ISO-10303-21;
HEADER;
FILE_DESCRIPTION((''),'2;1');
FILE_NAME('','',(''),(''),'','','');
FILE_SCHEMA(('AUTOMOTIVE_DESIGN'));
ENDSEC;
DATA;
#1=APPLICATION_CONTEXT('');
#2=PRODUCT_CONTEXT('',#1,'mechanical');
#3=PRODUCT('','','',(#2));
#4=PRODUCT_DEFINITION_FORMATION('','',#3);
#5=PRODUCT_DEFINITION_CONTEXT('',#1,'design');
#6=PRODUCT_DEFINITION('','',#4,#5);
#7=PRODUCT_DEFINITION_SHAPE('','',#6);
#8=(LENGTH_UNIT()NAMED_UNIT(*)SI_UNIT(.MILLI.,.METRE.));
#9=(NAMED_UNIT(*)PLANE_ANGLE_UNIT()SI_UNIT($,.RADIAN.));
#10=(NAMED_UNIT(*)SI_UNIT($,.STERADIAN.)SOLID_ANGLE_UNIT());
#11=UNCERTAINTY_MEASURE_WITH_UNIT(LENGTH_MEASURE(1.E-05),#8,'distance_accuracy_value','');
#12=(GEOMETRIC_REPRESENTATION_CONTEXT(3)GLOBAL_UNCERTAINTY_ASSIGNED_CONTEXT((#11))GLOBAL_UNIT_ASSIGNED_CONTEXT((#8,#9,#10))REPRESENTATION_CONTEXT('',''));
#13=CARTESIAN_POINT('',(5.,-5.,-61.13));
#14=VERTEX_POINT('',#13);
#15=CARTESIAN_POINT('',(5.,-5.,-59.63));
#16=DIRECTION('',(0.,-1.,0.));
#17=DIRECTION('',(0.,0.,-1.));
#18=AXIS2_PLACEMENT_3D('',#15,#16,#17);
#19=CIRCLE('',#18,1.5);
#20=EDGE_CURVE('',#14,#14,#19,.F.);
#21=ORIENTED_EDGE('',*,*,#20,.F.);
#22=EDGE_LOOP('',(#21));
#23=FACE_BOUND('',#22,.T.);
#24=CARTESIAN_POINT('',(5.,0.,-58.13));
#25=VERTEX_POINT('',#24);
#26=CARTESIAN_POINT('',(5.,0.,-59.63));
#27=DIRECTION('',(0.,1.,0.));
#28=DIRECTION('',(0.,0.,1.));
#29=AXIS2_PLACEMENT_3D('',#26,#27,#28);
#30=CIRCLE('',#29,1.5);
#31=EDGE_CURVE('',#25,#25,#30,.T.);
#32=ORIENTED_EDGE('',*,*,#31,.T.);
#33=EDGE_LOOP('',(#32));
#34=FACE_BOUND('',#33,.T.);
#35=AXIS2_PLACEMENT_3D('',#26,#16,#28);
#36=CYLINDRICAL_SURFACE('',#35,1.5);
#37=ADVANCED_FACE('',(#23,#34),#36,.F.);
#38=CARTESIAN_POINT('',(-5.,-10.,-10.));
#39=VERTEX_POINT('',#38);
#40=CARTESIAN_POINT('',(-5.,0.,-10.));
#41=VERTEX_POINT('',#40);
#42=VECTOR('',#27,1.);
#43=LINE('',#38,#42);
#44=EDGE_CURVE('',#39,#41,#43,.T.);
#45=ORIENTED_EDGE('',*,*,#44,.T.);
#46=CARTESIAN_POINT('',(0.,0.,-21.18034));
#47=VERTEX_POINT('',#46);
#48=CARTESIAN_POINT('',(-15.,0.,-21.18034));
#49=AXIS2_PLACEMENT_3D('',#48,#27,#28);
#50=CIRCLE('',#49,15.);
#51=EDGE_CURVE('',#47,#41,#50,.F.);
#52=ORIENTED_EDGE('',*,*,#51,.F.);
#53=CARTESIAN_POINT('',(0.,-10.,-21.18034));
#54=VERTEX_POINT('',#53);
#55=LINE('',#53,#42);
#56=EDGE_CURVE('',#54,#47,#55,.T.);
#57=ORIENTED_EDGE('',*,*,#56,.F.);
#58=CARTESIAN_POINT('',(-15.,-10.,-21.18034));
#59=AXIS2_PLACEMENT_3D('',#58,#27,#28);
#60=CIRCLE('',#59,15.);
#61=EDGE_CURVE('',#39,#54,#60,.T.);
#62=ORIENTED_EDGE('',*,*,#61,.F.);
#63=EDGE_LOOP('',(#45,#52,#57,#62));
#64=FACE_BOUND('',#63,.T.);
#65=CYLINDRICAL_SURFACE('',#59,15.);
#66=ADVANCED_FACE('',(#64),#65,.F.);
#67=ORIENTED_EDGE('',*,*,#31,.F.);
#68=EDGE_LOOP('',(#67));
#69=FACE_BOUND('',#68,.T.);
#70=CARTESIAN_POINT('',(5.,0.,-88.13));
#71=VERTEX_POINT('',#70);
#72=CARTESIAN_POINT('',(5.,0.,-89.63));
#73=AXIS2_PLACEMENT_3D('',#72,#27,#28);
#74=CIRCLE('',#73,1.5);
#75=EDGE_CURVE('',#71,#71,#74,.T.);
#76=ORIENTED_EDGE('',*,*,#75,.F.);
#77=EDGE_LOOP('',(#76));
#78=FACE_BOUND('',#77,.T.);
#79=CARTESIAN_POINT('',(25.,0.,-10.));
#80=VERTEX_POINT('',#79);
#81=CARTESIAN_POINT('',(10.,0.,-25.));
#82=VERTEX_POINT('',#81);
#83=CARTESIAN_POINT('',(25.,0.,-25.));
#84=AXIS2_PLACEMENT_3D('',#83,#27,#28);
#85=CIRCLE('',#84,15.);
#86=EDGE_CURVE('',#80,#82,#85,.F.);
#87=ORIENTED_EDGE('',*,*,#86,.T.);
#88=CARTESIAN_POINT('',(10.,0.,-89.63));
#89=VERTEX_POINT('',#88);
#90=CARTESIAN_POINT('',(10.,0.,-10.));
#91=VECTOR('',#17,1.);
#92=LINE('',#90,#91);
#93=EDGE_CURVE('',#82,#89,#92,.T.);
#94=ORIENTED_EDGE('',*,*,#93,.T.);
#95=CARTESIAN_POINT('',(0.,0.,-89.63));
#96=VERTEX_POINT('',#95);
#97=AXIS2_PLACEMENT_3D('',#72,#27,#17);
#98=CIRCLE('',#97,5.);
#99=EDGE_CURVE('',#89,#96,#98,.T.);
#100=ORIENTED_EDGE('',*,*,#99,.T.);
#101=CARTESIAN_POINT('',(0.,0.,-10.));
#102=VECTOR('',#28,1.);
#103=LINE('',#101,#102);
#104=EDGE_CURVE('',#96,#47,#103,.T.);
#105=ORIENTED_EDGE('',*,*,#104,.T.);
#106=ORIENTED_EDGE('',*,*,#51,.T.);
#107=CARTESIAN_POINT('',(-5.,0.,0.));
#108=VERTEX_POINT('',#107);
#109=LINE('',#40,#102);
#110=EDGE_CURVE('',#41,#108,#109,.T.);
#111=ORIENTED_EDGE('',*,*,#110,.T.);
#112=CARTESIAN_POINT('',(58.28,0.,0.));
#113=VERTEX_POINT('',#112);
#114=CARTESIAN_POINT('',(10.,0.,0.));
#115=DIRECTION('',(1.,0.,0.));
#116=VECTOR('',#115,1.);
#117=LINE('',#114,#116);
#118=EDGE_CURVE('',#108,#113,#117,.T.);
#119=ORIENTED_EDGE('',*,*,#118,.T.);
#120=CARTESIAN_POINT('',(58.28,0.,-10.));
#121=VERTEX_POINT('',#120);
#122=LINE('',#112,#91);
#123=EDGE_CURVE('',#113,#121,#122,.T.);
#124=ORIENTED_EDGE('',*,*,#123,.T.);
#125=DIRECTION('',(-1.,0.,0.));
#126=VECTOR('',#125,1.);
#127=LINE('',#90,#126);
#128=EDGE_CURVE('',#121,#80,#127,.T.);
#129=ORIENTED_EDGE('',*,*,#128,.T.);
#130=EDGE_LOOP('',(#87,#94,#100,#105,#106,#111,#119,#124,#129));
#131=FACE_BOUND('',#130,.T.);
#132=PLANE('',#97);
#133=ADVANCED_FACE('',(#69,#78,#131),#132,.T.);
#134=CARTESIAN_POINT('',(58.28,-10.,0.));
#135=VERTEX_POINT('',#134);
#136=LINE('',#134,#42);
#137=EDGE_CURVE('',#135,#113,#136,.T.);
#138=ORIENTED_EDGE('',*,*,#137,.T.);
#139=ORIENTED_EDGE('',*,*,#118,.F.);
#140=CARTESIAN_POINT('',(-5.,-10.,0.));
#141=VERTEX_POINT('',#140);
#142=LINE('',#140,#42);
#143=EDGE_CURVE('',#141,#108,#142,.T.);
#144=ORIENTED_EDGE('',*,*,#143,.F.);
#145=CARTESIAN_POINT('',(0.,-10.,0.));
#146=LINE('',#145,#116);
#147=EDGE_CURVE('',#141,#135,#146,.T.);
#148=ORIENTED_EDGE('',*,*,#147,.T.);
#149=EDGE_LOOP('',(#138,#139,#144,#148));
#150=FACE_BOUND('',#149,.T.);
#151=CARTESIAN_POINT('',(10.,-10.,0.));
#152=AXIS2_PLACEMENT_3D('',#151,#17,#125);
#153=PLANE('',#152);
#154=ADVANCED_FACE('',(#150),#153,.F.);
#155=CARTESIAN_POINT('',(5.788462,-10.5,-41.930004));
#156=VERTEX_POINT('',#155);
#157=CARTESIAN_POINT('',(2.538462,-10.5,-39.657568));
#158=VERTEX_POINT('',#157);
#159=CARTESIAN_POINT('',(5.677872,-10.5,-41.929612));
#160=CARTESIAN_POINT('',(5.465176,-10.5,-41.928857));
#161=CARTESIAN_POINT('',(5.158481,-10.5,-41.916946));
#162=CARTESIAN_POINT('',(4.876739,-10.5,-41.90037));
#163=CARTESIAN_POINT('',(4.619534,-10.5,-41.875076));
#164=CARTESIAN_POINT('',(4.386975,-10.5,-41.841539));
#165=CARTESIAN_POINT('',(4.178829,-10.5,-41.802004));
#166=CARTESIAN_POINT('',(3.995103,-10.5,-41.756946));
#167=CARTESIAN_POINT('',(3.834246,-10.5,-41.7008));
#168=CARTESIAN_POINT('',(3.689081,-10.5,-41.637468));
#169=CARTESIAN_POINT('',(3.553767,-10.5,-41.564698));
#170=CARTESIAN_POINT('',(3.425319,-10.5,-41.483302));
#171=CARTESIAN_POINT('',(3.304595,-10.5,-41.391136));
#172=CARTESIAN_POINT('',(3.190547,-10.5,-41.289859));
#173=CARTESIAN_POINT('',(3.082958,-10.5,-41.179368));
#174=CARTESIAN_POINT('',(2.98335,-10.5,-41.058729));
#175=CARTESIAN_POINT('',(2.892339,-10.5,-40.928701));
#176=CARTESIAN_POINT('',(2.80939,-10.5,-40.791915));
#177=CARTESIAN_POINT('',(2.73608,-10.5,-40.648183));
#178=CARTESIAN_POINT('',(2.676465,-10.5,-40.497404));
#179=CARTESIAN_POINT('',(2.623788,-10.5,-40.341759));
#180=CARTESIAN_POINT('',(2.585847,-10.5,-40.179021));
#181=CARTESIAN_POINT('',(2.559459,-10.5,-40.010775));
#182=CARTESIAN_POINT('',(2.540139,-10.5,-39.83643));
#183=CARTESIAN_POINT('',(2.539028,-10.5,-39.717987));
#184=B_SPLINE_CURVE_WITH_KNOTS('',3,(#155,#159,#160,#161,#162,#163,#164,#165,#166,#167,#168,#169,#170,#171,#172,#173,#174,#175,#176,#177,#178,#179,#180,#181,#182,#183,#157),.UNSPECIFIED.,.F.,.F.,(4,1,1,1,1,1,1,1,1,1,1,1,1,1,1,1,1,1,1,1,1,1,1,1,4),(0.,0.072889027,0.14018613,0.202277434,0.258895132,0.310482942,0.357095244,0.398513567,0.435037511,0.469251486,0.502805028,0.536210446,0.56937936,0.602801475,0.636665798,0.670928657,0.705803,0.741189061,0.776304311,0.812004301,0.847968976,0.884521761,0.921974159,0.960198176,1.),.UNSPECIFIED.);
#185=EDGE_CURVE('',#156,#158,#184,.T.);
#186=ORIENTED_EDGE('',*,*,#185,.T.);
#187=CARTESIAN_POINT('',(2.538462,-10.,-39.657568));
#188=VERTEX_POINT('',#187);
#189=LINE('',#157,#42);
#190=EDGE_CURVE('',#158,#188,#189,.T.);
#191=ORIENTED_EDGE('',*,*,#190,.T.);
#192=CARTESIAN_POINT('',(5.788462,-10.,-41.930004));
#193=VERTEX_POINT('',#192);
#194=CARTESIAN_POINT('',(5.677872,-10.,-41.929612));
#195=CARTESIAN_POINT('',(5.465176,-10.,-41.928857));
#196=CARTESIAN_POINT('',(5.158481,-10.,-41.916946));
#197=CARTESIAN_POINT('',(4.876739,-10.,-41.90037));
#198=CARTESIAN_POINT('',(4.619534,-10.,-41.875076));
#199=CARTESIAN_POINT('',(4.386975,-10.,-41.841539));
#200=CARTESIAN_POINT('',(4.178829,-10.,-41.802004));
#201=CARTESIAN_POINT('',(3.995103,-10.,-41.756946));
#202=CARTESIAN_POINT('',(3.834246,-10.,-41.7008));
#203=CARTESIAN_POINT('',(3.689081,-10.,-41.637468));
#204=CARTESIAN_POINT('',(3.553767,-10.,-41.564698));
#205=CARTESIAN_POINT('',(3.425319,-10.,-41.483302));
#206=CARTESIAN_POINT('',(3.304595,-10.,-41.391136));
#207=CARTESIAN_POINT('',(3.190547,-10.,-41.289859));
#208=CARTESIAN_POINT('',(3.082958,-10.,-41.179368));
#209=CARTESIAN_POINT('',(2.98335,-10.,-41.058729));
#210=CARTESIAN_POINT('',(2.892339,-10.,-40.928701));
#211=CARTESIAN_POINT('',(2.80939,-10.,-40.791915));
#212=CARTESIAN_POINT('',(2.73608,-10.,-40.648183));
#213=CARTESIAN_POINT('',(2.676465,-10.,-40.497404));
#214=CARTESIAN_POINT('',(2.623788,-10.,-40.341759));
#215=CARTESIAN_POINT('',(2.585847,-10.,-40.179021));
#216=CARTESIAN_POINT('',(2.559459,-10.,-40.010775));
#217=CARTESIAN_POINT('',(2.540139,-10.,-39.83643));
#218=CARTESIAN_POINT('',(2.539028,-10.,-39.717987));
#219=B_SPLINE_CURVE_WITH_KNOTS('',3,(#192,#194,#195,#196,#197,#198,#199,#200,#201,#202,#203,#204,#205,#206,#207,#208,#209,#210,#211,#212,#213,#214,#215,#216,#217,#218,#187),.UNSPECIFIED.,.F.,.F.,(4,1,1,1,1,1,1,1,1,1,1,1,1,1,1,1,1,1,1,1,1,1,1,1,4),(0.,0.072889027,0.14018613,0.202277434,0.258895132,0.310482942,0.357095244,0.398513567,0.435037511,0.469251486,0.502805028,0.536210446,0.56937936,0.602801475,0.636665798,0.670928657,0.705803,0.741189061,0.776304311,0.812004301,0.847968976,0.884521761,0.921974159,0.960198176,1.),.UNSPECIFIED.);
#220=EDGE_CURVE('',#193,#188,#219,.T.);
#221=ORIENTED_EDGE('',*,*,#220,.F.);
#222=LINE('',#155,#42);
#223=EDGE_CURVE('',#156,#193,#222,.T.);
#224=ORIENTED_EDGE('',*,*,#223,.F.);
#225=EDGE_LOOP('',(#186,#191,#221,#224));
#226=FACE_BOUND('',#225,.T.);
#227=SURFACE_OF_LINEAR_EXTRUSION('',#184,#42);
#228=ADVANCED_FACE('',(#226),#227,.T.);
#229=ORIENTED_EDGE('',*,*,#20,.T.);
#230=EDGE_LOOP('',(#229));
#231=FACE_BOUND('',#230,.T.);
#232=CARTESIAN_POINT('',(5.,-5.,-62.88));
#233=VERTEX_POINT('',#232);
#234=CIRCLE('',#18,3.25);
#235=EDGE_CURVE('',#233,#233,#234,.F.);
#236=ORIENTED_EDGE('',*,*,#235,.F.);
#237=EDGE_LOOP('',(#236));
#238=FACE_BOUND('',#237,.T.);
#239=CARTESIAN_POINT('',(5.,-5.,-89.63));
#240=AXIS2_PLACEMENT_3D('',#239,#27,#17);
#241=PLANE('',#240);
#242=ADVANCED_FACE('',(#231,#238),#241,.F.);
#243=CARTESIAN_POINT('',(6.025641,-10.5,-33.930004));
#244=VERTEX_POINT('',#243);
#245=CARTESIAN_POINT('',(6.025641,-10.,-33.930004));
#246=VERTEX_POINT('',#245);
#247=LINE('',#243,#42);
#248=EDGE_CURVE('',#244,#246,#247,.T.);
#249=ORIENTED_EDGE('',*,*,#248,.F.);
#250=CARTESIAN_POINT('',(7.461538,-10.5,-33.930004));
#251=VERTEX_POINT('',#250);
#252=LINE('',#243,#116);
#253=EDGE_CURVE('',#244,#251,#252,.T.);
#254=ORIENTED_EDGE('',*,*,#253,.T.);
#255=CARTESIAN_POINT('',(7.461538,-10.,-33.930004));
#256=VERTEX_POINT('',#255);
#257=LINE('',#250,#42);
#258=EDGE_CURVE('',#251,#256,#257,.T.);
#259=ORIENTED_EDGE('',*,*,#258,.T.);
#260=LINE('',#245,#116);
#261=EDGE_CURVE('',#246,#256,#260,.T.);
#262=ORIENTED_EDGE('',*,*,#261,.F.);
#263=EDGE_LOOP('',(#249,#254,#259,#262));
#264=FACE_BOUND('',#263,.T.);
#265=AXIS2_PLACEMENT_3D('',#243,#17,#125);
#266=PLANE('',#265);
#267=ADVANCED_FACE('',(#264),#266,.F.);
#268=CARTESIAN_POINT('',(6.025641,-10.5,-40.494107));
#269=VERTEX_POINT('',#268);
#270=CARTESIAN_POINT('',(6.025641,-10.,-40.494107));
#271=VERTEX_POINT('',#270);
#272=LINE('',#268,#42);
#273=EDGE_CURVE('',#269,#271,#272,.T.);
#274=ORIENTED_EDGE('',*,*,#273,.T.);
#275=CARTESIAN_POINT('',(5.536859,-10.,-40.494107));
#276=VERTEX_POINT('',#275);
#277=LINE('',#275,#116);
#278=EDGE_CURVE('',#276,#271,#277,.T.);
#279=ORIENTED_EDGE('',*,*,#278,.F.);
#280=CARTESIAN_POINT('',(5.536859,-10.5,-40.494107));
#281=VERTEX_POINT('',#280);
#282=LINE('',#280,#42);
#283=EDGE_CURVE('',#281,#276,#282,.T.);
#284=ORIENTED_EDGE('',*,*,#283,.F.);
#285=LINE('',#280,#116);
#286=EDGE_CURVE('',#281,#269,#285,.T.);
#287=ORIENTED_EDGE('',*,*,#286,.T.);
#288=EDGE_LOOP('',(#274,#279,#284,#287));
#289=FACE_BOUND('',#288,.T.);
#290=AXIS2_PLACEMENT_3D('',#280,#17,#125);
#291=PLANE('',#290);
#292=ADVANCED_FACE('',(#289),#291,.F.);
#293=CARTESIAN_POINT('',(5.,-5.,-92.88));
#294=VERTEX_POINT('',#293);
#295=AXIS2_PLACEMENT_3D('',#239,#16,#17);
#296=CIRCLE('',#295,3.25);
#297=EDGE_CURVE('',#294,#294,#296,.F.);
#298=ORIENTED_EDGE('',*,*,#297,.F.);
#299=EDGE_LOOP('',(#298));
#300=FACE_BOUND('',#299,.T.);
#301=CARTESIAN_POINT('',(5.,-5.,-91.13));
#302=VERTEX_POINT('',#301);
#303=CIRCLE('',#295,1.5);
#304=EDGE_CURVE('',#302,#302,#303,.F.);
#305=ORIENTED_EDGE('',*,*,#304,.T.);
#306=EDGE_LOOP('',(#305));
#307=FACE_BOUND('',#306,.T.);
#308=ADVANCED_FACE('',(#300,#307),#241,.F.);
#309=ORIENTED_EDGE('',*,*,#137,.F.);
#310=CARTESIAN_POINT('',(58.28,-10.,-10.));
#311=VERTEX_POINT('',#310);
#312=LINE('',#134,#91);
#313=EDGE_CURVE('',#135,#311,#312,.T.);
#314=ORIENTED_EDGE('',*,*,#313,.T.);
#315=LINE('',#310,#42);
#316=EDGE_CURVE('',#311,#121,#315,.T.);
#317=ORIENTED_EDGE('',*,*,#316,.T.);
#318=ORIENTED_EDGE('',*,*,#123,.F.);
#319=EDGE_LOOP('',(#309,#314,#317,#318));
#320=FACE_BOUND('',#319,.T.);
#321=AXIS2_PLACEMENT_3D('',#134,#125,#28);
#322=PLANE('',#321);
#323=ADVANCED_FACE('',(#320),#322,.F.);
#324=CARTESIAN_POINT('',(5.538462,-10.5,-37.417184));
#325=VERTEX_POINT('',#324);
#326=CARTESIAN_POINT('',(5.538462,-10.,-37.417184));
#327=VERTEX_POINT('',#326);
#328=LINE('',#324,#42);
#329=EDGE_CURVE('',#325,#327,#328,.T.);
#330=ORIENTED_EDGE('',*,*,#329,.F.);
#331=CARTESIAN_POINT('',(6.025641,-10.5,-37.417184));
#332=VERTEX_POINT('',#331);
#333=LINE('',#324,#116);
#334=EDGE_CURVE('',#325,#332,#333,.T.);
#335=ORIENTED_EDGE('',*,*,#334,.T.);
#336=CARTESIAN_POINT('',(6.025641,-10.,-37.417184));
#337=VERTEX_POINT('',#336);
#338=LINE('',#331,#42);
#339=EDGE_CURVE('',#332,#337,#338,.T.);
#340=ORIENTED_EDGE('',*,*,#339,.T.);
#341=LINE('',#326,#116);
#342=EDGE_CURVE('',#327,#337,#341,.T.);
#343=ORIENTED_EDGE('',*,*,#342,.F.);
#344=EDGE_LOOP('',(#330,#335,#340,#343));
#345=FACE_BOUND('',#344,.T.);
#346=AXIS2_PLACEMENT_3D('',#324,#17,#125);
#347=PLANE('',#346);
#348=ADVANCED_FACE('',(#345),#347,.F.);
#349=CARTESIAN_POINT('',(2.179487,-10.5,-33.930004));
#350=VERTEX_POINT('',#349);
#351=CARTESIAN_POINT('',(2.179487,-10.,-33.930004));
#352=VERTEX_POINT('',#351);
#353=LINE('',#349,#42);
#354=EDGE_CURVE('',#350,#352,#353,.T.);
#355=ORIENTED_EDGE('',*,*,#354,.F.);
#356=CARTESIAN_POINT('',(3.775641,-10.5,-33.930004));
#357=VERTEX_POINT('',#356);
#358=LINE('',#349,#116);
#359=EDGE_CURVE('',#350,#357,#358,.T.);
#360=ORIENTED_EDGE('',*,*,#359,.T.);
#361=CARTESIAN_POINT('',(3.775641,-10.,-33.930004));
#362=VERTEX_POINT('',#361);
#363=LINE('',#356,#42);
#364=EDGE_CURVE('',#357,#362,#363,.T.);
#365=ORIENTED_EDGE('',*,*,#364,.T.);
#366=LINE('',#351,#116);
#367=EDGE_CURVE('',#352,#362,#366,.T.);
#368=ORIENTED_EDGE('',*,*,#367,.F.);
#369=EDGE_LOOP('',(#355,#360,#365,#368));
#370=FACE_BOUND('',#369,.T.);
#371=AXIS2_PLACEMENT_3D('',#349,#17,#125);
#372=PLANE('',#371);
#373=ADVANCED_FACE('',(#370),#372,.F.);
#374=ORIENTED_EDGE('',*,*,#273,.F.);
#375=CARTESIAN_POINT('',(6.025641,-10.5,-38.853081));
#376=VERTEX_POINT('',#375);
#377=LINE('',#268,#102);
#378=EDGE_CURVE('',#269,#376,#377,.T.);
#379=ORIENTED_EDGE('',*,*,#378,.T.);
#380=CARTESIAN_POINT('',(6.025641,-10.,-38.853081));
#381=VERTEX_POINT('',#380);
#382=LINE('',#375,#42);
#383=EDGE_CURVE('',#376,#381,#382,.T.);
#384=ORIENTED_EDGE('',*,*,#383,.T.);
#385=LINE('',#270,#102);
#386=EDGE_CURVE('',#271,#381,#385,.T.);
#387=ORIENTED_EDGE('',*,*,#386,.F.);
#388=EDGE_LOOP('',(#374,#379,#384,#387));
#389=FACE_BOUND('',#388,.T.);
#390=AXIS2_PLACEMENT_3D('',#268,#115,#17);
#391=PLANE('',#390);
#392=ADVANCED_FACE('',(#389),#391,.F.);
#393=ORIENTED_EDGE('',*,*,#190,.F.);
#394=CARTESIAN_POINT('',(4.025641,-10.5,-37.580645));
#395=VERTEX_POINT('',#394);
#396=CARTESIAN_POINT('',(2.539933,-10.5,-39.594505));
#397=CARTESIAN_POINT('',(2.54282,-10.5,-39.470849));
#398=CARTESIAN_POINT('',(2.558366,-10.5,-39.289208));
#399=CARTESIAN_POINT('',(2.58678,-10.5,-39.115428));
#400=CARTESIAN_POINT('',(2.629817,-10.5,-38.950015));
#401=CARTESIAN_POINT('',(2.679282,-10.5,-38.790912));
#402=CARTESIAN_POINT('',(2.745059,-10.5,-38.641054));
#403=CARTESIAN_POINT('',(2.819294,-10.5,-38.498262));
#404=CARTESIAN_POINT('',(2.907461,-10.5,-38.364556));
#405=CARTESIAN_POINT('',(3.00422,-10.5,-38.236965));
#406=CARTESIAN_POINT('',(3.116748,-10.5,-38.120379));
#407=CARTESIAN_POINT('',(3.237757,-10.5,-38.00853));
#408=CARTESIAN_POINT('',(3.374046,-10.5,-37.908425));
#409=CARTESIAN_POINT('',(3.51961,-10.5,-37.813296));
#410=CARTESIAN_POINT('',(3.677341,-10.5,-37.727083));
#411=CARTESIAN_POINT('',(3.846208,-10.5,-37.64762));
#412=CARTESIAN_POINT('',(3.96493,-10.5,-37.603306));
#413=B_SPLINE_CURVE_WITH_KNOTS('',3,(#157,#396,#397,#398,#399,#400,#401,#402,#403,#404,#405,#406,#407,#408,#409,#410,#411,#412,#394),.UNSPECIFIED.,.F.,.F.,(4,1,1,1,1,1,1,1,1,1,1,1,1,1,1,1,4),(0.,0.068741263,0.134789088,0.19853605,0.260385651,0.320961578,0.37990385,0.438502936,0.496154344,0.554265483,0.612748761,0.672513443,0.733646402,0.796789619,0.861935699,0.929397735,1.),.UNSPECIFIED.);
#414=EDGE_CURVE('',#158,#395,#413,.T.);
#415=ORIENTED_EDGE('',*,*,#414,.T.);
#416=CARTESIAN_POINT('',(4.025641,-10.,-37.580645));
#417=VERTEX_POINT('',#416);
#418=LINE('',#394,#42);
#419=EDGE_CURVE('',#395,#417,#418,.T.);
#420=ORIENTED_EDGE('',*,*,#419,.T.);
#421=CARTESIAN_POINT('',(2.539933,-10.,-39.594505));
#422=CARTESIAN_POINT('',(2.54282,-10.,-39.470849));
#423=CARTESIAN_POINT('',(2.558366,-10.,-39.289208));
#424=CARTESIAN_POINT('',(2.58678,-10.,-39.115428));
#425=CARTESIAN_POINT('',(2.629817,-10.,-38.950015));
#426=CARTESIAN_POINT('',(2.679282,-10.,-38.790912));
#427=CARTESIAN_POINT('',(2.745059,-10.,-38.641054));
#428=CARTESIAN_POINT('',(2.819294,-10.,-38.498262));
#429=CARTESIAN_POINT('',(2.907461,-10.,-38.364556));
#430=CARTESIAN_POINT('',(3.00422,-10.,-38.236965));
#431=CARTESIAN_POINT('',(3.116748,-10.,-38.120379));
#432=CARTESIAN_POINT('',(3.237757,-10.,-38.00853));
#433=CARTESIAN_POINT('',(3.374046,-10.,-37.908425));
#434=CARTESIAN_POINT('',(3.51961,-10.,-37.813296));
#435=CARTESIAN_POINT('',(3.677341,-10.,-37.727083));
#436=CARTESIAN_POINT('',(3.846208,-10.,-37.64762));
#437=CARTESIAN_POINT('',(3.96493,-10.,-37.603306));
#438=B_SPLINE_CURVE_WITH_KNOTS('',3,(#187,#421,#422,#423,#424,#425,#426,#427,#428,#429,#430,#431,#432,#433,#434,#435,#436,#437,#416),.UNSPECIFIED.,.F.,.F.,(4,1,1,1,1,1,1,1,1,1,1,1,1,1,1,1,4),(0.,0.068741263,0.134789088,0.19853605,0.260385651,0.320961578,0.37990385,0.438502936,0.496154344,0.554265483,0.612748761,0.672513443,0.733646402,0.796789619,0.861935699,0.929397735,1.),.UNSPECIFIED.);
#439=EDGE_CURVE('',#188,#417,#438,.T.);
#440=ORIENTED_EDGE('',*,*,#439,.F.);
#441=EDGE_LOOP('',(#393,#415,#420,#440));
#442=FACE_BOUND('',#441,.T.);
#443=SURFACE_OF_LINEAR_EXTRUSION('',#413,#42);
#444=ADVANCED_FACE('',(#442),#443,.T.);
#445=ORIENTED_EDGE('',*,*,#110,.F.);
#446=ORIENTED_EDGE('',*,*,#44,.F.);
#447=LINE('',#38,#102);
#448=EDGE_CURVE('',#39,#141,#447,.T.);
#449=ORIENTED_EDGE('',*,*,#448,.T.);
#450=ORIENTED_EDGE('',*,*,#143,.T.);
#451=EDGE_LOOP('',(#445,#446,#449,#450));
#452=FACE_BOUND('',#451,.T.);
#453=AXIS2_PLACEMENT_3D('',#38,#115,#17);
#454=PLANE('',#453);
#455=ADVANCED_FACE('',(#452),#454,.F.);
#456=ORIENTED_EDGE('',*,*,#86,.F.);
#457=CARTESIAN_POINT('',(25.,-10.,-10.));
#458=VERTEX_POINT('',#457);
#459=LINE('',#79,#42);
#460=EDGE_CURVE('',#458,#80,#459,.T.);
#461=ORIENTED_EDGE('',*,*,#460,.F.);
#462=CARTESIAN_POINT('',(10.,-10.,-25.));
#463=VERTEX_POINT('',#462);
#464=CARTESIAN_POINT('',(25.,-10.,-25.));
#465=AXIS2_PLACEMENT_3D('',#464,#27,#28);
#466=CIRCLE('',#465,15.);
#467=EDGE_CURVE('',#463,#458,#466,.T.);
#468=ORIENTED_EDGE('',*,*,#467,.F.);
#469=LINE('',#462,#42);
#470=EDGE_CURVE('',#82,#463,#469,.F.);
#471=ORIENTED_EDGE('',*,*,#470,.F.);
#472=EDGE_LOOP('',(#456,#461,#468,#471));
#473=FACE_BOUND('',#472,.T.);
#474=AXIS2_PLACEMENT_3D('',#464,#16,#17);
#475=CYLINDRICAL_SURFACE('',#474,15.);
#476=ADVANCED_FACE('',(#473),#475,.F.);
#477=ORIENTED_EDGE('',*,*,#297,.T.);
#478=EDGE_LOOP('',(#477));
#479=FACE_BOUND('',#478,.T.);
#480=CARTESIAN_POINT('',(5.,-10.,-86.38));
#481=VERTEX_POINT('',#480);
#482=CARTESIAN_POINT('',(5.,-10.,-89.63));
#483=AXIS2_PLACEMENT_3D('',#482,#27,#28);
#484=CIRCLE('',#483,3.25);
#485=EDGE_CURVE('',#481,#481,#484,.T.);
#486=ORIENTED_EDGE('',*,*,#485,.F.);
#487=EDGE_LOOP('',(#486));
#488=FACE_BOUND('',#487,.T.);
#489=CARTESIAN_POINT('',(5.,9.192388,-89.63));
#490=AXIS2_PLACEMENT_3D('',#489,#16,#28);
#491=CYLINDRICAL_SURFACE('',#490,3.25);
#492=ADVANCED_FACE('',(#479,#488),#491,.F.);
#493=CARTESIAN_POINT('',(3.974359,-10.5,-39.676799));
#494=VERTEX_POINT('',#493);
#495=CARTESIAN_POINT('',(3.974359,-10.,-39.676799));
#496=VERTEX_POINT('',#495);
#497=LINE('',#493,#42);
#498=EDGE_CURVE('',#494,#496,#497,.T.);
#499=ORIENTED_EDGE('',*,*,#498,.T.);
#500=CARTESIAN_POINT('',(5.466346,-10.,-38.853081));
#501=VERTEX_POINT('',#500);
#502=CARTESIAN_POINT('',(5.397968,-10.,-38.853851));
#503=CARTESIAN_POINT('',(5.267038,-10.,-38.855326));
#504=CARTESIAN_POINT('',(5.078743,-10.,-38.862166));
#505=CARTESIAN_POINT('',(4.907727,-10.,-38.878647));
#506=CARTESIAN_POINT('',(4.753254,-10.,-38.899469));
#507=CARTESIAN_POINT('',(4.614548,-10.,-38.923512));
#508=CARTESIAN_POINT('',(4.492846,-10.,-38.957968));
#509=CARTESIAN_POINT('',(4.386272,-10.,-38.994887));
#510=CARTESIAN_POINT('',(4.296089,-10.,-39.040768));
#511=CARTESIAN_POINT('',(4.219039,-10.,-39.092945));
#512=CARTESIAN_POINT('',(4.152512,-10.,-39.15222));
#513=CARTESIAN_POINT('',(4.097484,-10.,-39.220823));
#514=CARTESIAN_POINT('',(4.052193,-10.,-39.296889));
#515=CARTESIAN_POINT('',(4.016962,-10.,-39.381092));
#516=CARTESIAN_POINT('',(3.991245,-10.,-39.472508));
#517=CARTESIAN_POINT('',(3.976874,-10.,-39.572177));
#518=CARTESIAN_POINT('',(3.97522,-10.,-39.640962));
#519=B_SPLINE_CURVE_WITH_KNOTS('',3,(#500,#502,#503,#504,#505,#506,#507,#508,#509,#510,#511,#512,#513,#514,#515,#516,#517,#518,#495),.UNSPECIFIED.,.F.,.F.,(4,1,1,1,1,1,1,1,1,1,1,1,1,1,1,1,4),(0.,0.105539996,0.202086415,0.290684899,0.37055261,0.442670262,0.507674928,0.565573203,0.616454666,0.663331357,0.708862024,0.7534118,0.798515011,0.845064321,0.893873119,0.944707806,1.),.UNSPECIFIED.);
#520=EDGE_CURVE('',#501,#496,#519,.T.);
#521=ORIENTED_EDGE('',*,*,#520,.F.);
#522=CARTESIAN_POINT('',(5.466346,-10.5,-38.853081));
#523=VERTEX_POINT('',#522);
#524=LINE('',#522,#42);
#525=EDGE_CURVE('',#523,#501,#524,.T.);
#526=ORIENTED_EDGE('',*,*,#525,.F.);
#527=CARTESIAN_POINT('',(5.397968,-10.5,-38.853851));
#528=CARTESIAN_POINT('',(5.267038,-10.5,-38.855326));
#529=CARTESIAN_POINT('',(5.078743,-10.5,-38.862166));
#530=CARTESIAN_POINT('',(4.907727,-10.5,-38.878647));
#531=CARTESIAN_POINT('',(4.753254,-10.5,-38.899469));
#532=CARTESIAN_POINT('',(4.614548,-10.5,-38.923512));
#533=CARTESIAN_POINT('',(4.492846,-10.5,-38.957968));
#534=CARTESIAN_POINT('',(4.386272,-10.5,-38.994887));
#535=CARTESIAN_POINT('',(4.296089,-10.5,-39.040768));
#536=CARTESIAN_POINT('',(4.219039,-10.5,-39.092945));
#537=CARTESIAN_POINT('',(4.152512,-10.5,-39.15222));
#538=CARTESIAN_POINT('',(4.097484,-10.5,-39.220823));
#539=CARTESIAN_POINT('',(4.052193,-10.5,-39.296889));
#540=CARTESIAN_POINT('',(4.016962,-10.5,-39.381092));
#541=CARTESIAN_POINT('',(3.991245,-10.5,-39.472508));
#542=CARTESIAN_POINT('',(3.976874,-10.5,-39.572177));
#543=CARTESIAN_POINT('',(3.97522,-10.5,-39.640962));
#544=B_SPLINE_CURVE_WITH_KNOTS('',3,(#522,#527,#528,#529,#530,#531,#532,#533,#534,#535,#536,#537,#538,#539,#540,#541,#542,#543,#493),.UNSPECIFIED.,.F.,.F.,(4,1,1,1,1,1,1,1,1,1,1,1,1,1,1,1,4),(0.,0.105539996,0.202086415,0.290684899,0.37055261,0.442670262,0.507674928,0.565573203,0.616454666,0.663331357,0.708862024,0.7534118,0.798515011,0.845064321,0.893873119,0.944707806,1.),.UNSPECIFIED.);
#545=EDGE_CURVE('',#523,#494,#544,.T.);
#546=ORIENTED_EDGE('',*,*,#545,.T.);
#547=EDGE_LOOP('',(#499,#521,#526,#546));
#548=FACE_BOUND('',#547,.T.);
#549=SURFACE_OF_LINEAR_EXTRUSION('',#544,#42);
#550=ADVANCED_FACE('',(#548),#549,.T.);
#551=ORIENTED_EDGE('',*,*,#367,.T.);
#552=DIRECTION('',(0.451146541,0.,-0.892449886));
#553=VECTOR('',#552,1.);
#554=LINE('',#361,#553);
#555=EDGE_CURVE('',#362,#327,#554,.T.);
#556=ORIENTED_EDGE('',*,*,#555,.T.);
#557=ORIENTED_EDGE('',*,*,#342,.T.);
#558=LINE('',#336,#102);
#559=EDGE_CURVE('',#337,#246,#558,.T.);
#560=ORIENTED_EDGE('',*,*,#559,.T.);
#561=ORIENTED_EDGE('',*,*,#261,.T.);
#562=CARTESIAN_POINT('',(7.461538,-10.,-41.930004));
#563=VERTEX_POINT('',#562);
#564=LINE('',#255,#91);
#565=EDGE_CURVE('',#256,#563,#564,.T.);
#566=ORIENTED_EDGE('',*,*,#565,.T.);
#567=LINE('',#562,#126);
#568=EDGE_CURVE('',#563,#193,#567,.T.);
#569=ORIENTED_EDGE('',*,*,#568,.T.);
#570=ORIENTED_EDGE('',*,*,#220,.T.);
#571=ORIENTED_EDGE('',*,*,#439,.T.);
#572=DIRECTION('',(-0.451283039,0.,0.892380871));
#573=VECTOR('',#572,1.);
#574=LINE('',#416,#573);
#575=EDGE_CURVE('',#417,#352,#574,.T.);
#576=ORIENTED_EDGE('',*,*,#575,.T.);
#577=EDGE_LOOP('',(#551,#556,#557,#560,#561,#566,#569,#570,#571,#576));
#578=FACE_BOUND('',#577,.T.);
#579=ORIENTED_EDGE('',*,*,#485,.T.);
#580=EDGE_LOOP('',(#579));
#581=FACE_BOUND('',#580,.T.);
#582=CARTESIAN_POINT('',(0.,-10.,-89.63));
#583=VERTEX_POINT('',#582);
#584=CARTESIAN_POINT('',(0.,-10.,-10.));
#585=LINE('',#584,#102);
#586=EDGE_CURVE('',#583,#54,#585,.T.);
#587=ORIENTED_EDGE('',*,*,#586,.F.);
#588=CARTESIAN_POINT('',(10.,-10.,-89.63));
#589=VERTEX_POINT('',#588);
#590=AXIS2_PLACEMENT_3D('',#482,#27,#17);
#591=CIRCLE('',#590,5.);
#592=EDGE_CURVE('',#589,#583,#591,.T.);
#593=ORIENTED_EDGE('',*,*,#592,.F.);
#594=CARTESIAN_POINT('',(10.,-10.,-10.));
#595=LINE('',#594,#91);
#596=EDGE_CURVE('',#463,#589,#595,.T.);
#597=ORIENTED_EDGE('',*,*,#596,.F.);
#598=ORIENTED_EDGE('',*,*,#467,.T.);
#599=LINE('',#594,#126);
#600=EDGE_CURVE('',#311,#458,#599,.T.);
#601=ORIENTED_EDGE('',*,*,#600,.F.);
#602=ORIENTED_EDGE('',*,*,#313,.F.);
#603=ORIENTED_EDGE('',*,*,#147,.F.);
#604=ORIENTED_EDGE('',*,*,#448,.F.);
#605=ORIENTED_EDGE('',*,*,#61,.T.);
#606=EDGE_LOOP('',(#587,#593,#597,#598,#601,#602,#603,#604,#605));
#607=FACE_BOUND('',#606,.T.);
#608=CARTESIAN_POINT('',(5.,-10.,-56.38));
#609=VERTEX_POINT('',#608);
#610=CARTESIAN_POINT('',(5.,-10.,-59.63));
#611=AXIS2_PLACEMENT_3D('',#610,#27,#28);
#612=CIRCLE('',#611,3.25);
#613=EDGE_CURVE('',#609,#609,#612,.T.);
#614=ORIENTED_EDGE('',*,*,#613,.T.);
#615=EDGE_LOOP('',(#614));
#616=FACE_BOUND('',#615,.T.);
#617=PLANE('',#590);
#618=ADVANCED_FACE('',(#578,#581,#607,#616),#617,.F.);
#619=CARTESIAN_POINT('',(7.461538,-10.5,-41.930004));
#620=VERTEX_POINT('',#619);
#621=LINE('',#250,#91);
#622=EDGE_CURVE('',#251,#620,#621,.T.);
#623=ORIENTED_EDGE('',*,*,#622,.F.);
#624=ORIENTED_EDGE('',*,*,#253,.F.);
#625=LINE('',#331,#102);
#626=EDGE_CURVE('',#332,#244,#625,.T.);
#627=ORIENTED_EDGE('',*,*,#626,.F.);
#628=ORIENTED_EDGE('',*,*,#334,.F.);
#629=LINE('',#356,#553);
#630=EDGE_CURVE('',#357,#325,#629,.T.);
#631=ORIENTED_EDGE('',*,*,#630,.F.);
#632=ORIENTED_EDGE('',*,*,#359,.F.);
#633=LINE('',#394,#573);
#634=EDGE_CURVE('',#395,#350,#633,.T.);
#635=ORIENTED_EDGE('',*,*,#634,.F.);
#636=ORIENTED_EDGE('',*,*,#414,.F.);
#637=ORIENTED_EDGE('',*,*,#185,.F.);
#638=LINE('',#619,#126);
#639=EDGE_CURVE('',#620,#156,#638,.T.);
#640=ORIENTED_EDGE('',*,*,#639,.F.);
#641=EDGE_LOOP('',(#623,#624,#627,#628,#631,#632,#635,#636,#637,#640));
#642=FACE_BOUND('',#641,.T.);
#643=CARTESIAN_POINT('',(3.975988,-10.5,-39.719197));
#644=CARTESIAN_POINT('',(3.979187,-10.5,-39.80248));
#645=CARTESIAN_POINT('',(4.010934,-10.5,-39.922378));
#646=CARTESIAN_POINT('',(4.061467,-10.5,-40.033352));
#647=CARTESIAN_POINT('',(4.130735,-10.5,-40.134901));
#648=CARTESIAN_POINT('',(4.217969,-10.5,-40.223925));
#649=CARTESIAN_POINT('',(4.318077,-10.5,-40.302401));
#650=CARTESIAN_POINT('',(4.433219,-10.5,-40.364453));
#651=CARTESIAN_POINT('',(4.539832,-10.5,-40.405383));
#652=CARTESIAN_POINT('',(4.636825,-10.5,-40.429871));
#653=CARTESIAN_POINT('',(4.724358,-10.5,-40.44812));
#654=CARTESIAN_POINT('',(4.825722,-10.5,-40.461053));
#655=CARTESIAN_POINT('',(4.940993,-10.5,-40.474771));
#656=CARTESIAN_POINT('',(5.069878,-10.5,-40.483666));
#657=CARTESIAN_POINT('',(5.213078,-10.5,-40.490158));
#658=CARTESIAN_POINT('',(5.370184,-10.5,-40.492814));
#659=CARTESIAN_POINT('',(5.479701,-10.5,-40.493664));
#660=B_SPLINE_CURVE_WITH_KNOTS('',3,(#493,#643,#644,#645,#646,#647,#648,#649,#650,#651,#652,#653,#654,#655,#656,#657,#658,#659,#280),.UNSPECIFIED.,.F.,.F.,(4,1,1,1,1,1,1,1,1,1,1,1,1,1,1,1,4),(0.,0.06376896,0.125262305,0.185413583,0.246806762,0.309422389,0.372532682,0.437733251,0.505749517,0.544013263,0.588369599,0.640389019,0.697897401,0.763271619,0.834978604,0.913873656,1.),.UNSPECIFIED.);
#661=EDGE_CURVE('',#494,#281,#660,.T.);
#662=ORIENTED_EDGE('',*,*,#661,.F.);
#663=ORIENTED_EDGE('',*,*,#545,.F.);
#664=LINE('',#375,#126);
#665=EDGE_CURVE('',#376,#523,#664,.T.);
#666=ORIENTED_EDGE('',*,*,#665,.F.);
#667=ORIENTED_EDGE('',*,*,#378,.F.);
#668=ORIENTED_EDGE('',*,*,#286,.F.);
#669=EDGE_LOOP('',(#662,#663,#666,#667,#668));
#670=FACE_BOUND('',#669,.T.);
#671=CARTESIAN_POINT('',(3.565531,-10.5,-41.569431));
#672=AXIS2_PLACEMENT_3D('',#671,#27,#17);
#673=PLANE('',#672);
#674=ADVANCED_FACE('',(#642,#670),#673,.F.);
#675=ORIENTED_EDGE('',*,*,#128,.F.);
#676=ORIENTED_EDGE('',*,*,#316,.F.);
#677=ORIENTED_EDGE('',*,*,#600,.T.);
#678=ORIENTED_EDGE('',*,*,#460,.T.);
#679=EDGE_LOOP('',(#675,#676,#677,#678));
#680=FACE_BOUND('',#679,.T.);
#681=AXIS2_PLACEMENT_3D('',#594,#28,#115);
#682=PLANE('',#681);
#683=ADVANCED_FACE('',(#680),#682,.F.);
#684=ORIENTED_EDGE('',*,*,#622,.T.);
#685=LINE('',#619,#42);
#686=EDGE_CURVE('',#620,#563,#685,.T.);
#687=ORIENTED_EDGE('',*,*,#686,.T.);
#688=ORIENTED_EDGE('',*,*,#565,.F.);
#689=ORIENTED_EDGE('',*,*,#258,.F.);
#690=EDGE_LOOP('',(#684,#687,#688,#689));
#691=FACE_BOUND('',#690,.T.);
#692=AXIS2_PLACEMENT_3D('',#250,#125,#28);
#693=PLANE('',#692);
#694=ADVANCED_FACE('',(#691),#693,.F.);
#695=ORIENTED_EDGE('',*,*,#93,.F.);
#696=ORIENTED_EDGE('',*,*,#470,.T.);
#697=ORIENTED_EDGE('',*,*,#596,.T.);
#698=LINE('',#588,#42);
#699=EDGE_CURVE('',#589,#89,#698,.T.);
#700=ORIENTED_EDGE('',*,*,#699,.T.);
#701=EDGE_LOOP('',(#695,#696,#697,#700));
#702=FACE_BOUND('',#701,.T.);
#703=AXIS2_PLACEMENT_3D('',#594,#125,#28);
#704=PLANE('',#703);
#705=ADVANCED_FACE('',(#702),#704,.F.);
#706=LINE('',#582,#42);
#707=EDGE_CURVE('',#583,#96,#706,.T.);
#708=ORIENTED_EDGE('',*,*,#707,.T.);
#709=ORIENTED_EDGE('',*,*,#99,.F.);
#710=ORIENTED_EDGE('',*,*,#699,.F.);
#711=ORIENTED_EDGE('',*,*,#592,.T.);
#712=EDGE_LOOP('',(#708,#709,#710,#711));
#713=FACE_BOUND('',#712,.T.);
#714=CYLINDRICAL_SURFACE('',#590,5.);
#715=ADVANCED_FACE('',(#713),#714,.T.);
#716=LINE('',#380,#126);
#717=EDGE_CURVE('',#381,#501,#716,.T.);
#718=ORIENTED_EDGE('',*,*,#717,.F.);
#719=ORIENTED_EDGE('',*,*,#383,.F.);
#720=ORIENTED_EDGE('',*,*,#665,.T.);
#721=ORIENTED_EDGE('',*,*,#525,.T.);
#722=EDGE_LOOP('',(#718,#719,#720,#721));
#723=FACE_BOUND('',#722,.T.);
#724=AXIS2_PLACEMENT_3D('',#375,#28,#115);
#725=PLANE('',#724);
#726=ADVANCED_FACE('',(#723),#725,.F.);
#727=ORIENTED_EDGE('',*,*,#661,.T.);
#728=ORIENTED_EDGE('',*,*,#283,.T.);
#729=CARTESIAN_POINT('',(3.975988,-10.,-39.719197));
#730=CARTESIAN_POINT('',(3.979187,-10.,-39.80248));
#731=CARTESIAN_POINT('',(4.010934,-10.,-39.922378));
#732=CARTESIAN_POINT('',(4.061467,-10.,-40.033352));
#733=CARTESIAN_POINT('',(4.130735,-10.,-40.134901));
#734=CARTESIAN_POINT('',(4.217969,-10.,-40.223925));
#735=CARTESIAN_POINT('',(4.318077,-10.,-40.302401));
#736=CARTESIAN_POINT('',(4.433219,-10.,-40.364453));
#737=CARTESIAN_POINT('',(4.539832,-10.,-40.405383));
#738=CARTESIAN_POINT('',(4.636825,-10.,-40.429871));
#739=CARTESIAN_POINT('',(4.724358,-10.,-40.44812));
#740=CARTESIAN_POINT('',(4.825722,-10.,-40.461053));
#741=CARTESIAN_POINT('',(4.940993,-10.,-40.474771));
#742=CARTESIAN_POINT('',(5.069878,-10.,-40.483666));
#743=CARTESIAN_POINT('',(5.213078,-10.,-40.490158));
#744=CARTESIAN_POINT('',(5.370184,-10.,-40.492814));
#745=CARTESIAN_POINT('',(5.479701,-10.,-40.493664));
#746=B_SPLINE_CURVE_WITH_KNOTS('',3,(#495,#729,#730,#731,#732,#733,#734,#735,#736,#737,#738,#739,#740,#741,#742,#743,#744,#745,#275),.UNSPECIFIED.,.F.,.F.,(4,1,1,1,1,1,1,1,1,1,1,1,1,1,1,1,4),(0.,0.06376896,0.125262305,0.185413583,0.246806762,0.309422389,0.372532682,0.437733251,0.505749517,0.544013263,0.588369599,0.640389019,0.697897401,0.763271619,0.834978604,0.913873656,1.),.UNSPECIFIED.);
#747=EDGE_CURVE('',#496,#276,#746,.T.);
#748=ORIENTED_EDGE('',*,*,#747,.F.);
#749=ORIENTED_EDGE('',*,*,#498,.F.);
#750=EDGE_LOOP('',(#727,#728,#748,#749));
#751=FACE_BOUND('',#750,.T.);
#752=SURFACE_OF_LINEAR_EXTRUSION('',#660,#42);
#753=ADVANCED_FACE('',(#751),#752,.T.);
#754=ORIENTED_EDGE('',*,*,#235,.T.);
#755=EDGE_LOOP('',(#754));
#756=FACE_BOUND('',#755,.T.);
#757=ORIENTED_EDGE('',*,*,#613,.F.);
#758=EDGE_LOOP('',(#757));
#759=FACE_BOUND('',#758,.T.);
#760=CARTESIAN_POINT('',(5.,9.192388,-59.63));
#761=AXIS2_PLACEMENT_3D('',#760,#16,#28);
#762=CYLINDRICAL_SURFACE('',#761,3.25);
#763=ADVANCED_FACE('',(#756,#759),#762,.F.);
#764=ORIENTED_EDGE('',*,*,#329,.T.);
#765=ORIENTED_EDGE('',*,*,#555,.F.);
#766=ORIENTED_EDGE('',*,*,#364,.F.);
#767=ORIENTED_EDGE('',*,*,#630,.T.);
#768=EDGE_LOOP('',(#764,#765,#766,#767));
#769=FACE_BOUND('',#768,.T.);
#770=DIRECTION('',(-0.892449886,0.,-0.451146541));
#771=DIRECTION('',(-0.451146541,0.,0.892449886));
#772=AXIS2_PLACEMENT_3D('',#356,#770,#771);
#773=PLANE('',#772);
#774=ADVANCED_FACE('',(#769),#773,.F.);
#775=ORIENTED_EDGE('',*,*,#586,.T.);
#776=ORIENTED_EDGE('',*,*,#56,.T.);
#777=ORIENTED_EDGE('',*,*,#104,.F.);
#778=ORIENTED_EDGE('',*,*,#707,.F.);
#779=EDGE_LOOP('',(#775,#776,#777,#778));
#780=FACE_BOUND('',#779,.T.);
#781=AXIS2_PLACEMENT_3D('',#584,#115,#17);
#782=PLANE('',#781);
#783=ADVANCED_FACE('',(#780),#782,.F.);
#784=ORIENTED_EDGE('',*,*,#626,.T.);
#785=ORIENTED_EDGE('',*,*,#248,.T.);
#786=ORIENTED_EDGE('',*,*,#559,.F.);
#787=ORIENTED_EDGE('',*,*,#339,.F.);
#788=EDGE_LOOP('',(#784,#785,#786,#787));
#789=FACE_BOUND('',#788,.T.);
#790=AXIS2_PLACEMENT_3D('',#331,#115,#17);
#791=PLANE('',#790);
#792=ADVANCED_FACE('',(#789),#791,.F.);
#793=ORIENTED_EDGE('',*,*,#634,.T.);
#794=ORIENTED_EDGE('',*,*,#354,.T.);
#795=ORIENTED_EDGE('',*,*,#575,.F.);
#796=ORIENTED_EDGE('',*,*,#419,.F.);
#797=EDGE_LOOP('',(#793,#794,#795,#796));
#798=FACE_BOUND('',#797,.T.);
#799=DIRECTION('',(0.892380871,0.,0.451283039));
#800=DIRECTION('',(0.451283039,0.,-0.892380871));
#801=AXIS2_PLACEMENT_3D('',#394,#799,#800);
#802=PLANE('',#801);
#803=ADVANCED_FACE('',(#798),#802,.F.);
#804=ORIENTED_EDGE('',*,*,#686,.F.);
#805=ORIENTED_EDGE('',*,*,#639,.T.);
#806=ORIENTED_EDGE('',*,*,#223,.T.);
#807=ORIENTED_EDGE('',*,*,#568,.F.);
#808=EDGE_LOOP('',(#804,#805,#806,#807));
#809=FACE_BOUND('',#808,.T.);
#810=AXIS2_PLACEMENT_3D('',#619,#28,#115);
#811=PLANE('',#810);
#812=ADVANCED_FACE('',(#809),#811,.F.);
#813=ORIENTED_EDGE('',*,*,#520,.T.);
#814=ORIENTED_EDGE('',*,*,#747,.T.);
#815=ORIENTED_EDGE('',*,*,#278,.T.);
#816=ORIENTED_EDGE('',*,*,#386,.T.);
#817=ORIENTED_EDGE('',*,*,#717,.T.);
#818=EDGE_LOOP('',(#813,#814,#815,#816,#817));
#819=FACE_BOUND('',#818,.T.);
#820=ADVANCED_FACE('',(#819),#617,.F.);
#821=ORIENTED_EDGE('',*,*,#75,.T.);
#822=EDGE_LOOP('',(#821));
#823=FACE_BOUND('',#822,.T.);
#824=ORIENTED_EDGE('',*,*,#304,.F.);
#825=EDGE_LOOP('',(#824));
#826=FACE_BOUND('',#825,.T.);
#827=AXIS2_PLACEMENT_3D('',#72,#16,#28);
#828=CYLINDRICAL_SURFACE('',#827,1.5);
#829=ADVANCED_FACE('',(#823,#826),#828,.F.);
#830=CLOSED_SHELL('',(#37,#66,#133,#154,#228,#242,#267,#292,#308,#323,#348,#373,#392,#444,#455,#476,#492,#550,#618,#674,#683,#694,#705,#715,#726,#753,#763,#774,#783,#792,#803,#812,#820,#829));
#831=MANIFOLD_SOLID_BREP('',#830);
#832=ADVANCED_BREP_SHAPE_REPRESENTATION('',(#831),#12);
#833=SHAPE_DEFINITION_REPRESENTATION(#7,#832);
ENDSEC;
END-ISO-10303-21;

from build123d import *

# Parameters (mm, degrees)
BOSS_EXTRUDE1_DEPTH = 10
SKETCH2_R           = 1.5
CUT_EXTRUDE1_DEPTH  = 112.585820336
BOSS_EXTRUDE2_DEPTH = 0.5
SKETCH5_R           = 3.25
CUT_EXTRUDE2_DEPTH  = 5
FILLET1_R           = 15


with BuildPart() as part:
    # Sketch1 → Boss-Extrude1 (new body)
    with BuildSketch(Plane(origin=(0, 0, 0), x_dir=(1, 0, 0), z_dir=(0, 1, 0))):
        with BuildLine():
            Line((0, 0), (10, 0))
            Line((10, 0), (58.28, 0))
            Line((58.28, 0), (58.28, 10))
            Line((58.28, 10), (10, 10))
            Line((10, 10), (10, 89.63))
            ThreePointArc((10, 89.63), (5, 94.63), (0, 89.63))
            Line((0, 89.63), (0, 10))
            Line((0, 10), (-5, 10))
            Line((-5, 10), (-5, 0))
            Line((-5, 0), (0, 0))
        make_face()
    extrude(amount=BOSS_EXTRUDE1_DEPTH)

    # Sketch2 → Cut-Extrude1 (cut, through all)
    with BuildSketch(Plane(origin=(0, 10, 0), x_dir=(1, 0, 0), z_dir=(0, 1, 0))):
        with Locations(Location((5, 89.63, 0), (0, 0, 270))):
            Circle(SKETCH2_R)
        with Locations(Location((5, 59.63, 0), (0, 0, 270))):
            Circle(SKETCH2_R)
    extrude(amount=-CUT_EXTRUDE1_DEPTH, mode=Mode.SUBTRACT)

    # Sketch4 → Boss-Extrude2 (add)
    with BuildSketch(Plane(origin=(0, 10, 0), x_dir=(1, 0, 0), z_dir=(0, 1, 0))):
        with BuildLine():
            Line((7.461538462, 41.930004151), (5.788461538, 41.930004151))
            add(Edge.make_bspline(
                [(5.788461538, 41.930004151), (5.677871663, 41.92961162), (5.465176181, 41.928856674), (5.158480914, 41.916945611), (4.876739133, 41.900370391), (4.619533695, 41.875076164), (4.386974636, 41.841539077), (4.178828878, 41.802004401), (3.995102505, 41.756946162), (3.834246039, 41.700800041), (3.689081032, 41.637468067), (3.553767063, 41.564698468), (3.425318906, 41.483301557), (3.304595098, 41.391135559), (3.19054652, 41.289858519), (3.082958012, 41.179368492), (2.983349901, 41.058728567), (2.892338963, 40.928701036), (2.809389819, 40.791915054), (2.736080173, 40.648182815), (2.676464647, 40.497404362), (2.62378794, 40.341758769), (2.585846614, 40.179021052), (2.559458976, 40.010775491), (2.540138981, 39.836429843), (2.539028173, 39.71798715), (2.538461538, 39.657568254)],
                knots=[0, 0, 0, 0, 1.749336639, 3.364467119, 4.854658419, 6.213483162, 7.451590619, 8.570285859, 9.5643256, 10.440900261, 11.26203566, 12.067320669, 12.869050712, 13.665104639, 14.467235401, 15.27997916, 16.102287765, 16.939272006, 17.78853747, 18.631303466, 19.488103222, 20.351255419, 21.228522269, 22.127379805, 23.044756219, 24, 24, 24, 24], degree=3))
            add(Edge.make_bspline(
                [(2.538461538, 39.657568254), (2.539933452, 39.594504805), (2.542819606, 39.470848877), (2.558366003, 39.289208404), (2.586779932, 39.115427505), (2.629816962, 38.950014988), (2.679282438, 38.790912103), (2.745058832, 38.641054396), (2.819293994, 38.498262405), (2.907460927, 38.364555977), (3.004219829, 38.236965223), (3.116748396, 38.120378621), (3.237756507, 38.008530081), (3.374046466, 37.908425416), (3.519610488, 37.81329591), (3.677340774, 37.727083244), (3.846207924, 37.64762023), (3.964929894, 37.603306164), (4.025641026, 37.580645177)],
                knots=[0, 0, 0, 0, 1.099860209, 2.156625411, 3.176576793, 4.16617041, 5.135385252, 6.078461593, 7.016046972, 7.938469504, 8.868247731, 9.803980173, 10.76021508, 11.73834243, 12.748633912, 13.790971185, 14.870363756, 16, 16, 16, 16], degree=3))
            Line((4.025641026, 37.580645177), (2.179487179, 33.930004151))
            Line((2.179487179, 33.930004151), (3.775641026, 33.930004151))
            Line((3.775641026, 33.930004151), (5.538461538, 37.417183638))
            Line((5.538461538, 37.417183638), (6.025641026, 37.417183638))
            Line((6.025641026, 37.417183638), (6.025641026, 33.930004151))
            Line((6.025641026, 33.930004151), (7.461538462, 33.930004151))
            Line((7.461538462, 33.930004151), (7.461538462, 41.930004151))
        make_face()
        with BuildLine():
            Line((6.025641026, 38.853081074), (5.466346154, 38.853081074))
            add(Edge.make_bspline(
                [(5.466346154, 38.853081074), (5.397967707, 38.853851198), (5.267037673, 38.85532582), (5.078743088, 38.862165728), (4.907726699, 38.878646528), (4.753254104, 38.899469401), (4.61454801, 38.923512416), (4.492845628, 38.957967516), (4.386271709, 38.994887028), (4.296089158, 39.040768404), (4.219039259, 39.092945479), (4.152511603, 39.152219935), (4.097483692, 39.220822569), (4.052192915, 39.296889059), (4.016961614, 39.381092194), (3.991245464, 39.472507614), (3.976873938, 39.572176658), (3.975220446, 39.64096187), (3.974358974, 39.676799023)],
                knots=[0, 0, 0, 0, 1.688639943, 3.233382647, 4.650958383, 5.928841754, 7.082724185, 8.122798841, 9.049171256, 9.863274652, 10.613301712, 11.341792392, 12.054588806, 12.776240173, 13.521029143, 14.301969904, 15.115324896, 16, 16, 16, 16], degree=3))
            add(Edge.make_bspline(
                [(3.974358974, 39.676799023), (3.975987665, 39.719196991), (3.979186925, 39.802479943), (4.010933525, 39.922378191), (4.061467254, 40.033352223), (4.130735157, 40.134900631), (4.217969074, 40.223924975), (4.318076877, 40.302400643), (4.433219134, 40.36445333), (4.539832198, 40.405382621), (4.636825167, 40.429871039), (4.724358262, 40.448119591), (4.825722112, 40.461052863), (4.940993243, 40.474770901), (5.069877824, 40.483666354), (5.213078352, 40.490158262), (5.370183559, 40.49281442), (5.479700808, 40.493663547), (5.536858974, 40.494106715)],
                knots=[0, 0, 0, 0, 1.020303359, 2.004196876, 2.966617323, 3.9489082, 4.950758222, 5.960522915, 7.003732012, 8.091992268, 8.70421221, 9.413913587, 10.24622431, 11.166358409, 12.212345909, 13.359657661, 14.621978493, 16, 16, 16, 16], degree=3))
            Line((5.536858974, 40.494106715), (6.025641026, 40.494106715))
            Line((6.025641026, 40.494106715), (6.025641026, 38.853081074))
        make_face(mode=Mode.SUBTRACT)
    extrude(amount=BOSS_EXTRUDE2_DEPTH)

    # Sketch5 → Cut-Extrude2 (cut)
    with BuildSketch(Plane(origin=(0, 10, 0), x_dir=(1, 0, 0), z_dir=(0, 1, 0))):
        with Locations(Location((5, 89.63, 0), (0, 0, 270))):
            Circle(SKETCH5_R)
        with Locations(Location((5, 59.63, 0), (0, 0, 270))):
            Circle(SKETCH5_R)
    extrude(amount=-CUT_EXTRUDE2_DEPTH, mode=Mode.SUBTRACT)


with BuildPart() as body_2:
    # Mirror1: mirrored copy
    add(part.part.mirror(Plane.ZX))

    # Fillet1
    # the kernel refuses this fillet: 15 mm, written as the material it adds along each edge
    with BuildSketch(Plane(origin=(0, 0, -10), x_dir=(-1, 0, 0), z_dir=(0, -1, 0))) as fillet1_piece_1:
        with BuildLine():
            CenterArc((15, 11.180339887), FILLET1_R, 180, 48.189685104)
            Line((0, 11.180339887), (-0.3, 11.180339887))
            Line((-0.3, 11.180339887), (-0.3, 0))
            Line((-0.3, 0), (0, -0.3))
            ThreePointArc((0, -0.3), (2.5, -0.3), (4.8, -0.223606798))
            Line((4.8, -0.223606798), (5, 0))
        make_face()
    extrude(amount=10)
    with BuildSketch(Plane(origin=(10, 0, -10), x_dir=(1, 0, 0), z_dir=(0, -1, 0))) as fillet1_piece_2:
        with BuildLine():
            CenterArc((FILLET1_R, -FILLET1_R), FILLET1_R, 90, 90)
            Line((0, -FILLET1_R), (-FILLET1_R * 0.02, -FILLET1_R))
            Line((-FILLET1_R * 0.02, -FILLET1_R), (-FILLET1_R * 0.02, FILLET1_R * 0.02))
            Line((-FILLET1_R * 0.02, FILLET1_R * 0.02), (FILLET1_R, FILLET1_R * 0.02))
            Line((FILLET1_R, FILLET1_R * 0.02), (FILLET1_R, 0))
        make_face()
    extrude(amount=10)


solid = body_2.part
